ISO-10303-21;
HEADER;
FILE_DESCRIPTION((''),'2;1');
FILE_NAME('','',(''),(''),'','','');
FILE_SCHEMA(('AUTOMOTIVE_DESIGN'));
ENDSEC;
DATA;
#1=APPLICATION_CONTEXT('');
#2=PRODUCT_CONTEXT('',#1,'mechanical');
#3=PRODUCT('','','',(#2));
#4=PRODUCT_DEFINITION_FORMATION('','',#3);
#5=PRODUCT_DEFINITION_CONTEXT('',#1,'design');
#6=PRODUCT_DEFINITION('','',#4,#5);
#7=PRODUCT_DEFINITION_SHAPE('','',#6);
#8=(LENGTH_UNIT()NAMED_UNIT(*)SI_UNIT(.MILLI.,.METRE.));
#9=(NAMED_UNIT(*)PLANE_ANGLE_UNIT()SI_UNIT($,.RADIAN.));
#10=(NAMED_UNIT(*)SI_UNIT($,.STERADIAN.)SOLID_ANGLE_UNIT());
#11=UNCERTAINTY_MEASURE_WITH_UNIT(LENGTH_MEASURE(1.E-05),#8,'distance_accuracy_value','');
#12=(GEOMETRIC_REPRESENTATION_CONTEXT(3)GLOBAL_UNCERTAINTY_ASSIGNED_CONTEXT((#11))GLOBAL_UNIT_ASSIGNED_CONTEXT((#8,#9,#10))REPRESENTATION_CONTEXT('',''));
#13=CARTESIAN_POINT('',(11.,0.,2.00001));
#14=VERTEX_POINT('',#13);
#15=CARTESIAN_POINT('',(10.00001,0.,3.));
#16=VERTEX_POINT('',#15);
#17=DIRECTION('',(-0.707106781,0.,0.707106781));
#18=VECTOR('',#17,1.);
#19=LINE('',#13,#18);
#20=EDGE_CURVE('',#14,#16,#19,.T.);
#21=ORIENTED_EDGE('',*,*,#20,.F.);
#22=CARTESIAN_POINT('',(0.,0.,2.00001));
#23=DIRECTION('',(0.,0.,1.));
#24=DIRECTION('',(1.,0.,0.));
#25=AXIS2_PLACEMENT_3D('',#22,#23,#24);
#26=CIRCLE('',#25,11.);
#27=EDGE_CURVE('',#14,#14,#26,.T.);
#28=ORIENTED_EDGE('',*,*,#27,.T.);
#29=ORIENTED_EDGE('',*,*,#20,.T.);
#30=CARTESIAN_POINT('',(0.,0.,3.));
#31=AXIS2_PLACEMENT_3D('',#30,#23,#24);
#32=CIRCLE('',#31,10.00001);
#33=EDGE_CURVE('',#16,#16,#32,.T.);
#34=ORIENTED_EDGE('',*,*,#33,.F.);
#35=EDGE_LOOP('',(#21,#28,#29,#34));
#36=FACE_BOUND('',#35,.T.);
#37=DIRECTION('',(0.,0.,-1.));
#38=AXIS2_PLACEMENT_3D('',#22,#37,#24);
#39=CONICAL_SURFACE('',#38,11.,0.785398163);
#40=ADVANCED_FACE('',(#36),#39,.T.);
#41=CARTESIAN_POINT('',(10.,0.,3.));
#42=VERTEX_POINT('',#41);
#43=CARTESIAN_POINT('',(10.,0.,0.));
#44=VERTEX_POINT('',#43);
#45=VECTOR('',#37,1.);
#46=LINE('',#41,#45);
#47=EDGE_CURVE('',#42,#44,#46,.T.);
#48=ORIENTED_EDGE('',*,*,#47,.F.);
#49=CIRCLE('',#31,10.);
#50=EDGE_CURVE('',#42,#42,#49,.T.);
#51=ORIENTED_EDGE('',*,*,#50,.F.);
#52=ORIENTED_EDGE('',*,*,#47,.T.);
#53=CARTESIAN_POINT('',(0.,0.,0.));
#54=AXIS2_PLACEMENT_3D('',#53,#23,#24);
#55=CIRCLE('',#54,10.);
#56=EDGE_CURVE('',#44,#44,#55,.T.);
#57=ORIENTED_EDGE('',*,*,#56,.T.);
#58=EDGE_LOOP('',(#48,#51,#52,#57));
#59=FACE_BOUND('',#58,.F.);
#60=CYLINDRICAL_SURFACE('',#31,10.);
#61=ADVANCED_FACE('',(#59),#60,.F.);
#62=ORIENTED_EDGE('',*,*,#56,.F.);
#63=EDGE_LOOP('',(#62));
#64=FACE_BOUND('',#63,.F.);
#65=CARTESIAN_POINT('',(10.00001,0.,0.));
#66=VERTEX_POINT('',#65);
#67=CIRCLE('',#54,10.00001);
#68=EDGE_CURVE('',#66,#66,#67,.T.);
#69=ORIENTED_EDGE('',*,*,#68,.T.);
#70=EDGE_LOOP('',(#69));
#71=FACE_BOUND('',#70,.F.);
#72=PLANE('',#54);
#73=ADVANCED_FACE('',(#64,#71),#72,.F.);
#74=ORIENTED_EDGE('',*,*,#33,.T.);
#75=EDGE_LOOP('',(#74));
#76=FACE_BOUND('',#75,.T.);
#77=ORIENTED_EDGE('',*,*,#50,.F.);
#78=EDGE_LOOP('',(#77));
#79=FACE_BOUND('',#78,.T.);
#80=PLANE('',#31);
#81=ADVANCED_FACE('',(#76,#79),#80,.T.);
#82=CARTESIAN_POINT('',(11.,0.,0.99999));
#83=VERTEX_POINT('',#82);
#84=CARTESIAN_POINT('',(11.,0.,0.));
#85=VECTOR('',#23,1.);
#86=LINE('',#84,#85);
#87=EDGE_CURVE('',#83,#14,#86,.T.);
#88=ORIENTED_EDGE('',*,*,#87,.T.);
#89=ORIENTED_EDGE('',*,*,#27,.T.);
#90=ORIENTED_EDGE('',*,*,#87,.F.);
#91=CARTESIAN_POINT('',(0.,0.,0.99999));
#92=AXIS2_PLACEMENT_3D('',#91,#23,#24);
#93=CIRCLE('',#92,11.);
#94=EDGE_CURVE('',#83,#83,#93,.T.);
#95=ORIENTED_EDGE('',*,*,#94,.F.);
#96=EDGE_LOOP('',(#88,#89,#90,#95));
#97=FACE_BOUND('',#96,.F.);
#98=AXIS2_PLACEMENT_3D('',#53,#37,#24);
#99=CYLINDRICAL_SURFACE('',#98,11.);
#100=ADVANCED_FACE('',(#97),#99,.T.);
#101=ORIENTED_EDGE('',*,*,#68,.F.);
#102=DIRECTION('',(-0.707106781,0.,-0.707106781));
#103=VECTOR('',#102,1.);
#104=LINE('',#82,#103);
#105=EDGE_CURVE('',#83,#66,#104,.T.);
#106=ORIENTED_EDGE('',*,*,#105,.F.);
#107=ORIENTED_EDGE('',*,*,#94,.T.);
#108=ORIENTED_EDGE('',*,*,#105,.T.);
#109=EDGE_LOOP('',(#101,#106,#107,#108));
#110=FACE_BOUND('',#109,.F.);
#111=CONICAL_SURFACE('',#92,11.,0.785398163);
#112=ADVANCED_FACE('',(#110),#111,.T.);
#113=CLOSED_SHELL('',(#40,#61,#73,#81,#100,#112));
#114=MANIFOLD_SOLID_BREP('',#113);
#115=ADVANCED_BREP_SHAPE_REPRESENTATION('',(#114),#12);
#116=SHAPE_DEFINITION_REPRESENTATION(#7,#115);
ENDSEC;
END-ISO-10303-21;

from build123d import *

# Parameters (mm, degrees)
F0_R     = 11
F1_DEPTH = 3
F2_R     = 10
F3_DEPTH = 3
F4_SIZE  = 0.99999


# Not quite as in the source:
# - a fillet or chamfer is up to 0.001 mm smaller than in the source, because OpenCascade refuses the exact size


with BuildPart() as f1:
    # F0 (on Top) → F1 (new body)
    with BuildSketch(Plane.XY):
        Circle(F0_R)
    extrude(amount=F1_DEPTH)

    # F2 (on face) → F3 (cut)
    with BuildSketch(Plane.XY.offset(3)):
        Circle(F2_R)
    extrude(amount=-F3_DEPTH, mode=Mode.SUBTRACT)

    # F4 (size 1 in the source; OpenCascade refuses exactly that, so slightly less here)
    f4_edges = [f1.edges().sort_by_distance(p)[0] for p in [
        (-11, 0, 3),
        (-11, 0, 0),
    ]]
    chamfer(f4_edges, length=F4_SIZE)


solid = f1.part
